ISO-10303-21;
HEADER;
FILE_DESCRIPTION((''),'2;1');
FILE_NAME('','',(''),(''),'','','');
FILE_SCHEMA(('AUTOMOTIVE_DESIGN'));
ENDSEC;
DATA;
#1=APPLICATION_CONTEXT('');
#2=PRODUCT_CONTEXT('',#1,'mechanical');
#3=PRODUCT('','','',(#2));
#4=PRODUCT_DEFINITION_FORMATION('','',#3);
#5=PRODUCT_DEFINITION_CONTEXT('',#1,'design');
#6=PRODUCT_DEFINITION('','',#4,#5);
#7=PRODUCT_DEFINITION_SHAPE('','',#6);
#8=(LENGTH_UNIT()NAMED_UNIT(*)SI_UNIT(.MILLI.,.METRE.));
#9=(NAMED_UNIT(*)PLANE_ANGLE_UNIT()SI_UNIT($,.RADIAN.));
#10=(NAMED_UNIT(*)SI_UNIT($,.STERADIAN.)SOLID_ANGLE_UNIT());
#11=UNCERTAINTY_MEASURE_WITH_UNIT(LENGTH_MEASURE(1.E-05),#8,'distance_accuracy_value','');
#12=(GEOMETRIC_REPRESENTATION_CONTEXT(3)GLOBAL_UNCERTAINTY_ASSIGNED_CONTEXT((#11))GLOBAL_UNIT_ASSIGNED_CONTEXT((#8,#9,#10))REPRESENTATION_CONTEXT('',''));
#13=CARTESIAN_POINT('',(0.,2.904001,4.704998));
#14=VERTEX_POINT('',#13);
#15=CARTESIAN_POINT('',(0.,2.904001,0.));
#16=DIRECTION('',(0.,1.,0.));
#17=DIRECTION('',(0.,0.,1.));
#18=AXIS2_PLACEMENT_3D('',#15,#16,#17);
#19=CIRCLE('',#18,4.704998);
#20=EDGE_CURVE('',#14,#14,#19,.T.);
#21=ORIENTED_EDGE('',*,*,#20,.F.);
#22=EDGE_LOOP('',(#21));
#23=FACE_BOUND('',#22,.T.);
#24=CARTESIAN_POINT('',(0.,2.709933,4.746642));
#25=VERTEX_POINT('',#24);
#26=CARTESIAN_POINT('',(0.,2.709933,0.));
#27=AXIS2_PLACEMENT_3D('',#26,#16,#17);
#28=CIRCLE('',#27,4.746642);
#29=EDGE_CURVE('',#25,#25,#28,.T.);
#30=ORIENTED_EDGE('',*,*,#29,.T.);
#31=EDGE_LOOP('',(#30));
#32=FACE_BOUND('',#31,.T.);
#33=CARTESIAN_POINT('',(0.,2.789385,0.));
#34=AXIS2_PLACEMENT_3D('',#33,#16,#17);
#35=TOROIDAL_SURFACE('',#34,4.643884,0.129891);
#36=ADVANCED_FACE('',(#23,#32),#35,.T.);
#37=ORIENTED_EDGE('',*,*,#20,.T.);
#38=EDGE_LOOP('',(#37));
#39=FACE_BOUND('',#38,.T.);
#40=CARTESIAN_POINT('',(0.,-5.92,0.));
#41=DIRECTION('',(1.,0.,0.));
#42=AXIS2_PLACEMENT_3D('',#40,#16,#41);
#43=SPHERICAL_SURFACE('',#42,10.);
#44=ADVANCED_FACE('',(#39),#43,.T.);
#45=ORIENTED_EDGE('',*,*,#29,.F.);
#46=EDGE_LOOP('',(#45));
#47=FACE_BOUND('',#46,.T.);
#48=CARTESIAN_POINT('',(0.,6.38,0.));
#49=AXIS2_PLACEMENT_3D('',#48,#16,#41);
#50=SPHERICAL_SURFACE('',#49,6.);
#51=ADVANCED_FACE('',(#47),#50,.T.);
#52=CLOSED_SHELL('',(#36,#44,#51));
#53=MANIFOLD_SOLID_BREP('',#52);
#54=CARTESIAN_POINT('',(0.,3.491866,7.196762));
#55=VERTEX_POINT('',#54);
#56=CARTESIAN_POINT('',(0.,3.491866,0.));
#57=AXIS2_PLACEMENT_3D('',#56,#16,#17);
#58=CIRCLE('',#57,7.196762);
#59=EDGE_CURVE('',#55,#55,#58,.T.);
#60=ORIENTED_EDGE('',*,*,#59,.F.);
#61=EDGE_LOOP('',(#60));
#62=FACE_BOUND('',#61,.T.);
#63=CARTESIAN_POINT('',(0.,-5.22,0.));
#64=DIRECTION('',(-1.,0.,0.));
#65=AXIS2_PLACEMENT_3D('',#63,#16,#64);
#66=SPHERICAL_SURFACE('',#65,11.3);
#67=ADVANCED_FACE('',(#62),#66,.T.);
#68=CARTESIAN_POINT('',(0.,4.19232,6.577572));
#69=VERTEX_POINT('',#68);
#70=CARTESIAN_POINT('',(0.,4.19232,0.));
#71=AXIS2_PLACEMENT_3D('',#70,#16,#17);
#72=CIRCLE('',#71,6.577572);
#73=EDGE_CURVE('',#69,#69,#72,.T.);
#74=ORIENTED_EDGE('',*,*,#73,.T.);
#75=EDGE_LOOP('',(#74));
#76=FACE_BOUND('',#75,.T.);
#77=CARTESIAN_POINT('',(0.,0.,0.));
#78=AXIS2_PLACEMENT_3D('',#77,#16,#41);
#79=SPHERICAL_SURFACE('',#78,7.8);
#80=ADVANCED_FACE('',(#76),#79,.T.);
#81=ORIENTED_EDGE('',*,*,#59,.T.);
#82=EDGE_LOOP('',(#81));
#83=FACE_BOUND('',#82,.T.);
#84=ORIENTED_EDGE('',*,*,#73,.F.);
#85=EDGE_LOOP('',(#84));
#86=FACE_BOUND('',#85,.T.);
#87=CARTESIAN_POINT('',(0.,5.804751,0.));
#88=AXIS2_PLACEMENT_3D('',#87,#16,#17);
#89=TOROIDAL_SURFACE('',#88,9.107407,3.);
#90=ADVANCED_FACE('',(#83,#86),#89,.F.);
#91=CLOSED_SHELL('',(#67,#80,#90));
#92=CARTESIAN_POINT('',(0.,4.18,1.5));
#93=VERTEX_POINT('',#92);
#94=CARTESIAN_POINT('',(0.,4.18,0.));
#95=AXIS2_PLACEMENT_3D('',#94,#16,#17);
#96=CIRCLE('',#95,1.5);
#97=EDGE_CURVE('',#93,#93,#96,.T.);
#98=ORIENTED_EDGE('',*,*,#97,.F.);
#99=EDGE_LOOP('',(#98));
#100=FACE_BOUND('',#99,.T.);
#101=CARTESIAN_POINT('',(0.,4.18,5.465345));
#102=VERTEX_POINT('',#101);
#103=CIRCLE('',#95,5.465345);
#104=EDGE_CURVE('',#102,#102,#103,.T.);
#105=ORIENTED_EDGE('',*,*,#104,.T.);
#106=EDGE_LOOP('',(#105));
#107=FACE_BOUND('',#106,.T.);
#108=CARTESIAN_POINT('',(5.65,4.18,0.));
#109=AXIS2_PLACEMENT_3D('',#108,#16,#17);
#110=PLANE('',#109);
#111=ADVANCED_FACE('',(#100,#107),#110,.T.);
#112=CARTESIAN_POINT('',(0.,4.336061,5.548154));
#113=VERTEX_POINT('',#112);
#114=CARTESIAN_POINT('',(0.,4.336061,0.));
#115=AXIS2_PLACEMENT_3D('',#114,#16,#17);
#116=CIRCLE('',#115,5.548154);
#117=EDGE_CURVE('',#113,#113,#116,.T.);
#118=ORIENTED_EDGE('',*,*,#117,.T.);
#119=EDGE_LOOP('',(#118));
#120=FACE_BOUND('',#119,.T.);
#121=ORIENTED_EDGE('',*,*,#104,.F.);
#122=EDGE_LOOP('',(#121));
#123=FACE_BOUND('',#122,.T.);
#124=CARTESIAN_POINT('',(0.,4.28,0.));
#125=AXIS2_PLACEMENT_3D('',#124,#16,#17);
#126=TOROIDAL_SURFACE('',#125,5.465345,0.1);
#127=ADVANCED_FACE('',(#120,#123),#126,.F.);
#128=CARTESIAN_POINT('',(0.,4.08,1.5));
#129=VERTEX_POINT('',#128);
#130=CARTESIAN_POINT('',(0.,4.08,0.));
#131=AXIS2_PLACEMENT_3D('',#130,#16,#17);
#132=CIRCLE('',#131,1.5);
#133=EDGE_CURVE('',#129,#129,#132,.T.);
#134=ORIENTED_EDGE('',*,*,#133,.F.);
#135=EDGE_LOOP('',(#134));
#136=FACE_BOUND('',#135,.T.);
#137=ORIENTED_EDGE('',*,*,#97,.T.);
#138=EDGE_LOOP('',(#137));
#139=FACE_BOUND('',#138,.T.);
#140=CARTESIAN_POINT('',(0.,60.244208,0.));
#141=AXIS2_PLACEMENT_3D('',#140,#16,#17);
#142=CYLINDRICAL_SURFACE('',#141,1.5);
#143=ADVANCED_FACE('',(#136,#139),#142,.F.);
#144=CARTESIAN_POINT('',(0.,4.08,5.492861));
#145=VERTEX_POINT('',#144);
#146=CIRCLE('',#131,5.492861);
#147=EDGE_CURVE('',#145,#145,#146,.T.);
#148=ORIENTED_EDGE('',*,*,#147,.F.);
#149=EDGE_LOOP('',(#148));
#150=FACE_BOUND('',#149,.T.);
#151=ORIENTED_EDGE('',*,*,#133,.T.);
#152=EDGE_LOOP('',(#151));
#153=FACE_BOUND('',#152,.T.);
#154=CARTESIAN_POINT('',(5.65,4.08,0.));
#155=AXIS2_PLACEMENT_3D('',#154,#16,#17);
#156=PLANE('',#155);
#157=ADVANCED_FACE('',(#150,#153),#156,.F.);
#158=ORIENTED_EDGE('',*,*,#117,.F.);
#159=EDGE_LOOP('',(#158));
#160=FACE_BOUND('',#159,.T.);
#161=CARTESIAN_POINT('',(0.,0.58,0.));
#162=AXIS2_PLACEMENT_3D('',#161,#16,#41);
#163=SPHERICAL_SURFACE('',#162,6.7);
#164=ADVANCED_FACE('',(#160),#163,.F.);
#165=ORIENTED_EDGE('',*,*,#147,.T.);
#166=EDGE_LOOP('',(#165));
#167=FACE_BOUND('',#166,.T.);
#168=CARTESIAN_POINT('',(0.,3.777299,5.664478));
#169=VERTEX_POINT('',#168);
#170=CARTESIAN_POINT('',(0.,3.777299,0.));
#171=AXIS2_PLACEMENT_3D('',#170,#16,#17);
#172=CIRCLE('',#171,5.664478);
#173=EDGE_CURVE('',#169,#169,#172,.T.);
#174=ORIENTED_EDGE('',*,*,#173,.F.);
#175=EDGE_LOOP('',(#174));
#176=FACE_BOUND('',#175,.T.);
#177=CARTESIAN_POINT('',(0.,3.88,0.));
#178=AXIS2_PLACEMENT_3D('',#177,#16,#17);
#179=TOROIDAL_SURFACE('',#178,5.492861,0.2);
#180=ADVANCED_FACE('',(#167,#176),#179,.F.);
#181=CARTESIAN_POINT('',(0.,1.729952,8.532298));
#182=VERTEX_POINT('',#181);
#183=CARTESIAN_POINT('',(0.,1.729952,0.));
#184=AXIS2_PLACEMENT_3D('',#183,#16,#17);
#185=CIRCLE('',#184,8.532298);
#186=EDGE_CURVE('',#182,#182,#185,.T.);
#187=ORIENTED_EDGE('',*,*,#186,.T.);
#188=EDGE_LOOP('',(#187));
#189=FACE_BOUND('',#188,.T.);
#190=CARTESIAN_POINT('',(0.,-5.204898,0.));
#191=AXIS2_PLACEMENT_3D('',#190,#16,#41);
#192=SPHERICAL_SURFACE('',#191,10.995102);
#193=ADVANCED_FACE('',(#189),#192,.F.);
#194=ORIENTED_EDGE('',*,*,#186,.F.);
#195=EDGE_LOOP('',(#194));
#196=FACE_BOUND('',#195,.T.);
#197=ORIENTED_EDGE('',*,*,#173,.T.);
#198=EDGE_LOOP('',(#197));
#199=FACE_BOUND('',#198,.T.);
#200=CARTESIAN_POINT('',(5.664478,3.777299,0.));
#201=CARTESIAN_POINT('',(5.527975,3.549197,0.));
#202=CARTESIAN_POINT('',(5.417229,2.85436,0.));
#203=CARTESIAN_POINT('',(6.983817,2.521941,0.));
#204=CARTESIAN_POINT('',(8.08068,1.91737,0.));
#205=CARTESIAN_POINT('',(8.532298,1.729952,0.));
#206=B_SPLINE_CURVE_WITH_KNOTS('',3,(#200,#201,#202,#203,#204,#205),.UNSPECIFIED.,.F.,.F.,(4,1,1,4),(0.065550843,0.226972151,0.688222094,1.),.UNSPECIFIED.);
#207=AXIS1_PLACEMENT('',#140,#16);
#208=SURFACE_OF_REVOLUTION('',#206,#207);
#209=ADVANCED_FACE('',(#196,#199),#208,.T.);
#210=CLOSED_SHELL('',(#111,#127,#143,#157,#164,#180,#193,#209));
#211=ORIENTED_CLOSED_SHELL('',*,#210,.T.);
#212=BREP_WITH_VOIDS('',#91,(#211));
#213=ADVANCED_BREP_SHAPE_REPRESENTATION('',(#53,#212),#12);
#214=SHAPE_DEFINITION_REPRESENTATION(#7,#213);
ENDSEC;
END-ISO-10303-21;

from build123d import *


with BuildPart() as part:
    # Sketch6 → lens (revolve)
    with BuildSketch(Plane.XY):
        with BuildLine():
            ThreePointArc((4.704997748, 2.904001144), (2.424869951, 3.781546563), (0, 4.08))
            Line((0, 4.08), (0, 0.38))
            ThreePointArc((0, 0.38), (2.643822882, 0.993888177), (4.746641894, 2.709933144))
            ThreePointArc((4.746641894, 2.709933144), (4.77088424, 2.816637307), (4.704997748, 2.904001144))
        make_face()
    revolve(axis=Axis((0, 60.244207804, 0), (0, -1, 0)))


with BuildPart() as body_2:
    # Sketch6<7> → iris (revolve)
    with BuildSketch(Plane.XY):
        with BuildLine():
            Line((5.886123402, 4.08), (5.548153632, 4.336060606))
            ThreePointArc((5.548153632, 4.336060606), (5.553680131, 4.233128157), (5.465345369, 4.18))
            Line((5.465345369, 4.18), (1.5, 4.18))
            Line((1.5, 4.18), (1.5, 4.08))
            Line((1.5, 4.08), (5.492861113, 4.08))
            Line((5.492861113, 4.08), (5.886123402, 4.08))
        make_face()
    revolve(axis=Axis((0, 60.244207804, 0), (0, -1, 0)))

    # Sketch6<12> → ciliary body (revolve)
    with BuildSketch(Plane.XY):
        with BuildLine():
            Line((6.45968041, 3.692562089), (5.886123402, 4.08))
            Line((5.886123402, 4.08), (5.492861113, 4.08))
            ThreePointArc((5.492861113, 4.08), (5.666844203, 3.978640177), (5.66447834, 3.777298844))
            add(Edge.make_bspline(
                [(5.66447834, 3.777298844), (5.52797511, 3.549197167), (5.417228742, 2.854359981), (6.983816782, 2.521940583), (8.08067984, 1.917370456), (8.532298411, 1.729952463)],
                knots=[0.065550843, 0.065550843, 0.065550843, 0.065550843, 0.226972151, 0.688222094, 1, 1, 1, 1], degree=3))
            ThreePointArc((8.532298411, 1.729952463), (7.559948173, 2.778801061), (6.45968041, 3.692562089))
        make_face()
    revolve(axis=Axis((0, 60.244207804, 0), (0, -1, 0)))

    # Sketch6<13> → sclera (revolve)
    with BuildSketch(Plane.XY):
        with BuildLine():
            add(Edge.make_bspline(
                [(5.548153632, 4.336060606), (5.40298249, 5.044933477), (6.051343216, 4.92625791), (6.520858839, 4.28)],
                knots=[0, 0, 0, 0, 1, 1, 1, 1], degree=3))
            Line((5.548153632, 4.336060606), (5.886123402, 4.08))
            Line((5.886123402, 4.08), (6.45968041, 3.692562089))
            ThreePointArc((6.45968041, 3.692562089), (7.559948173, 2.778801061), (8.532298411, 1.729952463))
            ThreePointArc((8.532298411, 1.729952463), (9.928284236, -9.929455102), (0, -16.2))
            Line((0, -16.2), (0, -16.52))
            ThreePointArc((0, -16.52), (10.633298815, -9.043997424), (7.196762351, 3.491866142))
            ThreePointArc((7.196762351, 3.491866142), (6.859713943, 3.817824959), (6.577571883, 4.192320136))
            ThreePointArc((6.577571883, 4.192320136), (6.54936209, 4.236254975), (6.520858839, 4.28))
        make_face()
    revolve(axis=Axis((0, 60.244207804, 0), (0, -1, 0)))

    # Sketch6<14> → cornea (revolve)
    with BuildSketch(Plane.XY):
        with BuildLine():
            ThreePointArc((0, 7.28), (3.140413503, 6.498429102), (5.548153632, 4.336060606))
            add(Edge.make_bspline(
                [(5.548153632, 4.336060606), (5.40298249, 5.044933477), (6.051343216, 4.92625791), (6.520858839, 4.28)],
                knots=[0, 0, 0, 0, 1, 1, 1, 1], degree=3))
            ThreePointArc((6.520858839, 4.28), (3.705131577, 6.863818179), (0, 7.8))
            Line((0, 7.8), (0, 7.28))
        make_face()
    revolve(axis=Axis((0, 60.244207804, 0), (0, -1, 0)))


solid = Compound([part.part, body_2.part])
